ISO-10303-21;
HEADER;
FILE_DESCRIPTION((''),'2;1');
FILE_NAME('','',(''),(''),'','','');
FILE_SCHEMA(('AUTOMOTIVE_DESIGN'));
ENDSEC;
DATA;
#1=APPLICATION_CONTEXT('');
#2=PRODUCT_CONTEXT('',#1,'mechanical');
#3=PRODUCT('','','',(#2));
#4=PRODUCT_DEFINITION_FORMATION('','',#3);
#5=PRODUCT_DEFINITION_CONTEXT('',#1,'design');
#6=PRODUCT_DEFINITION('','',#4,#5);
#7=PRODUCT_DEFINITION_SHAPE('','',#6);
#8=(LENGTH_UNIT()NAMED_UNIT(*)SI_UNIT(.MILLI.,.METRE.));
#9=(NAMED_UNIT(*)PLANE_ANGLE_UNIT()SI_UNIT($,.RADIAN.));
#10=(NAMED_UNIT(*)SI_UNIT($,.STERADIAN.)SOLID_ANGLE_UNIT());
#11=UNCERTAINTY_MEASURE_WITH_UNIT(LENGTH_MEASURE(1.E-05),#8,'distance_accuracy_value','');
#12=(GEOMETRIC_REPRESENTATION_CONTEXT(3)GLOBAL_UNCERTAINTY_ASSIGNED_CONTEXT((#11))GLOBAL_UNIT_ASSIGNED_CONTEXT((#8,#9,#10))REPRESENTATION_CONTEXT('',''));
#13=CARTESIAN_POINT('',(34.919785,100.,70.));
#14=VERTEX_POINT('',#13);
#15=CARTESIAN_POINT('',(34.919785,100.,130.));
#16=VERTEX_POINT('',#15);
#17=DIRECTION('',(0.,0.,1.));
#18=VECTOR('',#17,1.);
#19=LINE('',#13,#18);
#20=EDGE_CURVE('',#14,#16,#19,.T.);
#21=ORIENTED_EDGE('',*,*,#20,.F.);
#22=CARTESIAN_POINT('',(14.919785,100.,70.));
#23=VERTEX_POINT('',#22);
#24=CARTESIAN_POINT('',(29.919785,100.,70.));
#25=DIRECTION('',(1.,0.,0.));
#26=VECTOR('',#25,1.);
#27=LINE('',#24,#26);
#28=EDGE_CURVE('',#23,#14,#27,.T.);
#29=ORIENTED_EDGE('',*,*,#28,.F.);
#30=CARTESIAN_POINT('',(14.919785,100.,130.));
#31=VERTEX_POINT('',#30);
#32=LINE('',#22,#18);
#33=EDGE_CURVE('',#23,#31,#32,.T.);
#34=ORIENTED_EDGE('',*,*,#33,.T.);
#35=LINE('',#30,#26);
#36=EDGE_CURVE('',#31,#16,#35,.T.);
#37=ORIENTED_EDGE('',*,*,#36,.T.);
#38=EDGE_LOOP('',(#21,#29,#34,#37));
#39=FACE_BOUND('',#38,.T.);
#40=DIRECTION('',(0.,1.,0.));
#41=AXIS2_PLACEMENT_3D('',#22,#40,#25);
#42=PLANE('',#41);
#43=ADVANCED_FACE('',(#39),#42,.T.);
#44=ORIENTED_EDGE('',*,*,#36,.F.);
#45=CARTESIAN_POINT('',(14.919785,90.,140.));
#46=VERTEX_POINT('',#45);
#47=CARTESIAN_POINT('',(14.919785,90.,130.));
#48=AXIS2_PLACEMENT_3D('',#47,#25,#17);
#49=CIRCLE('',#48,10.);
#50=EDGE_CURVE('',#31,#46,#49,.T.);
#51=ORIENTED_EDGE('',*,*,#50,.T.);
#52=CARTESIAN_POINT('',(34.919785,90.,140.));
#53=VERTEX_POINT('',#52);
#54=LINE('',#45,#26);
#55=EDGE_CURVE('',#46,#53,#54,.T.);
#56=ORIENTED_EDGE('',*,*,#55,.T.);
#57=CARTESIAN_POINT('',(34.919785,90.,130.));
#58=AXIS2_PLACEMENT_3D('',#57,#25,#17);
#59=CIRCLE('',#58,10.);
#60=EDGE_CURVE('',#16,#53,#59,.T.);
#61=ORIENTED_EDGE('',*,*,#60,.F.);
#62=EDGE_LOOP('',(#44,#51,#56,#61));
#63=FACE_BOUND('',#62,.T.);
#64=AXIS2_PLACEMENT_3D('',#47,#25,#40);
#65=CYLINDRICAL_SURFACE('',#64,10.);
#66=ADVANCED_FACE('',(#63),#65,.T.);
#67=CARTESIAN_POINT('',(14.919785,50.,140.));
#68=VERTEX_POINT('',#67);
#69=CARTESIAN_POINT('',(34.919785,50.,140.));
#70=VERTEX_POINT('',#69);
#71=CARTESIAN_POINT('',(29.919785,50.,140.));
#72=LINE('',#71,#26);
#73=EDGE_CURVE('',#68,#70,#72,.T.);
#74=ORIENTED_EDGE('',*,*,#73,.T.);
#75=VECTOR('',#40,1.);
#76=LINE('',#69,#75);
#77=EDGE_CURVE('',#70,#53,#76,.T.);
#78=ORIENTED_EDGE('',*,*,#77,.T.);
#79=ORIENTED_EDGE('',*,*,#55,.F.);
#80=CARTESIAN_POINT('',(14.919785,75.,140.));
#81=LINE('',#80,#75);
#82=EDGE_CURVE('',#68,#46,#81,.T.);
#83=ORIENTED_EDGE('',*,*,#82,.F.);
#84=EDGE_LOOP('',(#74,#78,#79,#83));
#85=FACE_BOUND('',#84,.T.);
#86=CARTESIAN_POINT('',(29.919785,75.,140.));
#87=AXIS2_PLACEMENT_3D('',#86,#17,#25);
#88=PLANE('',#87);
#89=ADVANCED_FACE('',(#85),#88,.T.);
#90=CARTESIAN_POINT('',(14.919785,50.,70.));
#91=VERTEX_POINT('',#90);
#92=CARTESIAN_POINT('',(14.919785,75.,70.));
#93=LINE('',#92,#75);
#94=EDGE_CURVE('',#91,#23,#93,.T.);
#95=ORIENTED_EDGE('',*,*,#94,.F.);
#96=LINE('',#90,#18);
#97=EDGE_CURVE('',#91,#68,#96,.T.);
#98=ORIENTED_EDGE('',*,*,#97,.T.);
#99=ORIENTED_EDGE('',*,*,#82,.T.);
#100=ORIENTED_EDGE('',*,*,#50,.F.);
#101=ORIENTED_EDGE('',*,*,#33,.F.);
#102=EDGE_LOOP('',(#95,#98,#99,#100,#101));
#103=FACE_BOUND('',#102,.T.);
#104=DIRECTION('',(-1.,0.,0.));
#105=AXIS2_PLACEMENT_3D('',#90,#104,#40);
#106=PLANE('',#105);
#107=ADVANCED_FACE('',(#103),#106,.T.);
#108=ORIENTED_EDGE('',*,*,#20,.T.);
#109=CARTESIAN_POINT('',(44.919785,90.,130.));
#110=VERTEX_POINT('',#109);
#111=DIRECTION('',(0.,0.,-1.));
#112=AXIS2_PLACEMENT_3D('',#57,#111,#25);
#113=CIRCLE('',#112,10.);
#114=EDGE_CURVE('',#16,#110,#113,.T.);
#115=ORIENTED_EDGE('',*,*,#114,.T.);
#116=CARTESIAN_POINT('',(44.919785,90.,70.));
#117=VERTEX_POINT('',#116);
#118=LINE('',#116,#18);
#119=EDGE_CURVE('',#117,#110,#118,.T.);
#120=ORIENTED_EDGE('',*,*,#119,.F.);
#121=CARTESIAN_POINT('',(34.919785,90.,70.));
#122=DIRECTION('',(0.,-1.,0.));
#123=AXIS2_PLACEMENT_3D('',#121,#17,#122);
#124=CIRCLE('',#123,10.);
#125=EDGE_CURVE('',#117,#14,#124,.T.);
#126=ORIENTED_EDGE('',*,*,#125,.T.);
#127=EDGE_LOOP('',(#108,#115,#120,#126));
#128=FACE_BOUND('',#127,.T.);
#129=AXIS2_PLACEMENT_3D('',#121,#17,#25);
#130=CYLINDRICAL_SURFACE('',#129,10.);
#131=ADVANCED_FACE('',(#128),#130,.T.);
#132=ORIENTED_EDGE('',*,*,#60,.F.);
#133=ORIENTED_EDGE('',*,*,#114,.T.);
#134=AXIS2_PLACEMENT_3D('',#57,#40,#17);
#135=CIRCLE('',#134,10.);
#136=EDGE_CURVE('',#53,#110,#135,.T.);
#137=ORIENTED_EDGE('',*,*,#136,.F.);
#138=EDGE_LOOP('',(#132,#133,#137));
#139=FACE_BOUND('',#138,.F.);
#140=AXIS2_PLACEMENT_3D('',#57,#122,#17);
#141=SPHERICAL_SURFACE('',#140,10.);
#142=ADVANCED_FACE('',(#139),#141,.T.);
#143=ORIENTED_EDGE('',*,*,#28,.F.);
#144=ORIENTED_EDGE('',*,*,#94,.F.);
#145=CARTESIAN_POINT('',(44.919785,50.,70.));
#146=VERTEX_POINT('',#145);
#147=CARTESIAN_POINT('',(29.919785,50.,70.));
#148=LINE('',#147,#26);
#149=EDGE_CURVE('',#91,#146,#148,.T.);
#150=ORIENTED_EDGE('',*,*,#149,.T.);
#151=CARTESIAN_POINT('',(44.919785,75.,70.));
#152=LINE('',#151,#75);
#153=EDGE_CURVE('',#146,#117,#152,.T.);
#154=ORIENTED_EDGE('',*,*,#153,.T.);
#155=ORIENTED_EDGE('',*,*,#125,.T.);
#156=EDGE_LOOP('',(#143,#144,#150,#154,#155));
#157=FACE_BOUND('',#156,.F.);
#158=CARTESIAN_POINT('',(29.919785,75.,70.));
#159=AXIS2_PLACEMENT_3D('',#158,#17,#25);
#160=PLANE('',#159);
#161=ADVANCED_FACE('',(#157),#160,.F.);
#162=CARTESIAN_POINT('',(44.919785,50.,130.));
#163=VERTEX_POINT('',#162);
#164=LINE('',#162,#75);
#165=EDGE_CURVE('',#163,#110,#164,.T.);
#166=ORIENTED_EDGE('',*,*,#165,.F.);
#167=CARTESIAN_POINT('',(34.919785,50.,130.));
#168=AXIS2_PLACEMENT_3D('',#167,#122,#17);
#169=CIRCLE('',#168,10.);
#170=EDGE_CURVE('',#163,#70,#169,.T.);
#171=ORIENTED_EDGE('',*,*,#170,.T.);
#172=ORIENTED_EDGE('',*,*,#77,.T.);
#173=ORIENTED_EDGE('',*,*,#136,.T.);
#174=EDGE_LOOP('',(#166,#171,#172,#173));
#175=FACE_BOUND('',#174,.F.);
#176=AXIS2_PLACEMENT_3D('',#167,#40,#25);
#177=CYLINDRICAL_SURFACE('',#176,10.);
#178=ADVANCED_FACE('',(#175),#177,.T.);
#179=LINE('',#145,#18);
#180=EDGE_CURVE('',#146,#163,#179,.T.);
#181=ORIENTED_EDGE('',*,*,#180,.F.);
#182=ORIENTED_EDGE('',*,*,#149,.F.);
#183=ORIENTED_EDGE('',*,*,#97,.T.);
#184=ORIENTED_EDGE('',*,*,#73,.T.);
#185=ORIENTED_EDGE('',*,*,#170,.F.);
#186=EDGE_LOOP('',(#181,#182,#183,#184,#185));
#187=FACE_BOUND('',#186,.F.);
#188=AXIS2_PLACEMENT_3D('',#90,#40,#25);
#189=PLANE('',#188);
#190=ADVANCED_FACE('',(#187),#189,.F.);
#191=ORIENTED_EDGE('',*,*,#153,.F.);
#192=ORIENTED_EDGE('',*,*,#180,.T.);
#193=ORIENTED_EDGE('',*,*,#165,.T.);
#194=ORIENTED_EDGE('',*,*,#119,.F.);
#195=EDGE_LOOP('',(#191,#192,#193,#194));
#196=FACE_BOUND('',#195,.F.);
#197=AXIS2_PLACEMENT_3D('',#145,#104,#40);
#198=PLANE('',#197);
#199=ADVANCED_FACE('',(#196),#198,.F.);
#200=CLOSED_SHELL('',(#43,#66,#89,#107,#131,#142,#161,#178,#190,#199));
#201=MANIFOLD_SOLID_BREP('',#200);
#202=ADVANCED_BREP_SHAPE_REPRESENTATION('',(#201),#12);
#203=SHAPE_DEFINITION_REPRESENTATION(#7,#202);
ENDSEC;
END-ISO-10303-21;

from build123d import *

# Parameters (mm, degrees)
F0_W     = 30
F0_H     = 50
F1_DEPTH = 70
F3_R     = 10


# Not quite as in the source:
# - a feature of the source that left no trace in its solid (it failed there, or was rolled back) is left out


with BuildPart() as f1:
    # F0 (on Top) → F1 (new body)
    with BuildSketch(Plane.XY):
        with Locations((-0.0802149171, 25)):
            Rectangle(F0_W, F0_H)
    extrude(amount=F1_DEPTH)


with BuildPart() as f1_1:
    # F2: moved
    add(f1.part.moved(Location((30, 50, 70))))

    # F3
    f3_edges = [f1_1.edges().sort_by_distance(p)[0] for p in [
        (44.919785, 75, 140),
        (29.919785, 100, 140),
        (44.919785, 100, 105),
    ]]
    fillet(f3_edges, radius=F3_R)


solid = f1_1.part
